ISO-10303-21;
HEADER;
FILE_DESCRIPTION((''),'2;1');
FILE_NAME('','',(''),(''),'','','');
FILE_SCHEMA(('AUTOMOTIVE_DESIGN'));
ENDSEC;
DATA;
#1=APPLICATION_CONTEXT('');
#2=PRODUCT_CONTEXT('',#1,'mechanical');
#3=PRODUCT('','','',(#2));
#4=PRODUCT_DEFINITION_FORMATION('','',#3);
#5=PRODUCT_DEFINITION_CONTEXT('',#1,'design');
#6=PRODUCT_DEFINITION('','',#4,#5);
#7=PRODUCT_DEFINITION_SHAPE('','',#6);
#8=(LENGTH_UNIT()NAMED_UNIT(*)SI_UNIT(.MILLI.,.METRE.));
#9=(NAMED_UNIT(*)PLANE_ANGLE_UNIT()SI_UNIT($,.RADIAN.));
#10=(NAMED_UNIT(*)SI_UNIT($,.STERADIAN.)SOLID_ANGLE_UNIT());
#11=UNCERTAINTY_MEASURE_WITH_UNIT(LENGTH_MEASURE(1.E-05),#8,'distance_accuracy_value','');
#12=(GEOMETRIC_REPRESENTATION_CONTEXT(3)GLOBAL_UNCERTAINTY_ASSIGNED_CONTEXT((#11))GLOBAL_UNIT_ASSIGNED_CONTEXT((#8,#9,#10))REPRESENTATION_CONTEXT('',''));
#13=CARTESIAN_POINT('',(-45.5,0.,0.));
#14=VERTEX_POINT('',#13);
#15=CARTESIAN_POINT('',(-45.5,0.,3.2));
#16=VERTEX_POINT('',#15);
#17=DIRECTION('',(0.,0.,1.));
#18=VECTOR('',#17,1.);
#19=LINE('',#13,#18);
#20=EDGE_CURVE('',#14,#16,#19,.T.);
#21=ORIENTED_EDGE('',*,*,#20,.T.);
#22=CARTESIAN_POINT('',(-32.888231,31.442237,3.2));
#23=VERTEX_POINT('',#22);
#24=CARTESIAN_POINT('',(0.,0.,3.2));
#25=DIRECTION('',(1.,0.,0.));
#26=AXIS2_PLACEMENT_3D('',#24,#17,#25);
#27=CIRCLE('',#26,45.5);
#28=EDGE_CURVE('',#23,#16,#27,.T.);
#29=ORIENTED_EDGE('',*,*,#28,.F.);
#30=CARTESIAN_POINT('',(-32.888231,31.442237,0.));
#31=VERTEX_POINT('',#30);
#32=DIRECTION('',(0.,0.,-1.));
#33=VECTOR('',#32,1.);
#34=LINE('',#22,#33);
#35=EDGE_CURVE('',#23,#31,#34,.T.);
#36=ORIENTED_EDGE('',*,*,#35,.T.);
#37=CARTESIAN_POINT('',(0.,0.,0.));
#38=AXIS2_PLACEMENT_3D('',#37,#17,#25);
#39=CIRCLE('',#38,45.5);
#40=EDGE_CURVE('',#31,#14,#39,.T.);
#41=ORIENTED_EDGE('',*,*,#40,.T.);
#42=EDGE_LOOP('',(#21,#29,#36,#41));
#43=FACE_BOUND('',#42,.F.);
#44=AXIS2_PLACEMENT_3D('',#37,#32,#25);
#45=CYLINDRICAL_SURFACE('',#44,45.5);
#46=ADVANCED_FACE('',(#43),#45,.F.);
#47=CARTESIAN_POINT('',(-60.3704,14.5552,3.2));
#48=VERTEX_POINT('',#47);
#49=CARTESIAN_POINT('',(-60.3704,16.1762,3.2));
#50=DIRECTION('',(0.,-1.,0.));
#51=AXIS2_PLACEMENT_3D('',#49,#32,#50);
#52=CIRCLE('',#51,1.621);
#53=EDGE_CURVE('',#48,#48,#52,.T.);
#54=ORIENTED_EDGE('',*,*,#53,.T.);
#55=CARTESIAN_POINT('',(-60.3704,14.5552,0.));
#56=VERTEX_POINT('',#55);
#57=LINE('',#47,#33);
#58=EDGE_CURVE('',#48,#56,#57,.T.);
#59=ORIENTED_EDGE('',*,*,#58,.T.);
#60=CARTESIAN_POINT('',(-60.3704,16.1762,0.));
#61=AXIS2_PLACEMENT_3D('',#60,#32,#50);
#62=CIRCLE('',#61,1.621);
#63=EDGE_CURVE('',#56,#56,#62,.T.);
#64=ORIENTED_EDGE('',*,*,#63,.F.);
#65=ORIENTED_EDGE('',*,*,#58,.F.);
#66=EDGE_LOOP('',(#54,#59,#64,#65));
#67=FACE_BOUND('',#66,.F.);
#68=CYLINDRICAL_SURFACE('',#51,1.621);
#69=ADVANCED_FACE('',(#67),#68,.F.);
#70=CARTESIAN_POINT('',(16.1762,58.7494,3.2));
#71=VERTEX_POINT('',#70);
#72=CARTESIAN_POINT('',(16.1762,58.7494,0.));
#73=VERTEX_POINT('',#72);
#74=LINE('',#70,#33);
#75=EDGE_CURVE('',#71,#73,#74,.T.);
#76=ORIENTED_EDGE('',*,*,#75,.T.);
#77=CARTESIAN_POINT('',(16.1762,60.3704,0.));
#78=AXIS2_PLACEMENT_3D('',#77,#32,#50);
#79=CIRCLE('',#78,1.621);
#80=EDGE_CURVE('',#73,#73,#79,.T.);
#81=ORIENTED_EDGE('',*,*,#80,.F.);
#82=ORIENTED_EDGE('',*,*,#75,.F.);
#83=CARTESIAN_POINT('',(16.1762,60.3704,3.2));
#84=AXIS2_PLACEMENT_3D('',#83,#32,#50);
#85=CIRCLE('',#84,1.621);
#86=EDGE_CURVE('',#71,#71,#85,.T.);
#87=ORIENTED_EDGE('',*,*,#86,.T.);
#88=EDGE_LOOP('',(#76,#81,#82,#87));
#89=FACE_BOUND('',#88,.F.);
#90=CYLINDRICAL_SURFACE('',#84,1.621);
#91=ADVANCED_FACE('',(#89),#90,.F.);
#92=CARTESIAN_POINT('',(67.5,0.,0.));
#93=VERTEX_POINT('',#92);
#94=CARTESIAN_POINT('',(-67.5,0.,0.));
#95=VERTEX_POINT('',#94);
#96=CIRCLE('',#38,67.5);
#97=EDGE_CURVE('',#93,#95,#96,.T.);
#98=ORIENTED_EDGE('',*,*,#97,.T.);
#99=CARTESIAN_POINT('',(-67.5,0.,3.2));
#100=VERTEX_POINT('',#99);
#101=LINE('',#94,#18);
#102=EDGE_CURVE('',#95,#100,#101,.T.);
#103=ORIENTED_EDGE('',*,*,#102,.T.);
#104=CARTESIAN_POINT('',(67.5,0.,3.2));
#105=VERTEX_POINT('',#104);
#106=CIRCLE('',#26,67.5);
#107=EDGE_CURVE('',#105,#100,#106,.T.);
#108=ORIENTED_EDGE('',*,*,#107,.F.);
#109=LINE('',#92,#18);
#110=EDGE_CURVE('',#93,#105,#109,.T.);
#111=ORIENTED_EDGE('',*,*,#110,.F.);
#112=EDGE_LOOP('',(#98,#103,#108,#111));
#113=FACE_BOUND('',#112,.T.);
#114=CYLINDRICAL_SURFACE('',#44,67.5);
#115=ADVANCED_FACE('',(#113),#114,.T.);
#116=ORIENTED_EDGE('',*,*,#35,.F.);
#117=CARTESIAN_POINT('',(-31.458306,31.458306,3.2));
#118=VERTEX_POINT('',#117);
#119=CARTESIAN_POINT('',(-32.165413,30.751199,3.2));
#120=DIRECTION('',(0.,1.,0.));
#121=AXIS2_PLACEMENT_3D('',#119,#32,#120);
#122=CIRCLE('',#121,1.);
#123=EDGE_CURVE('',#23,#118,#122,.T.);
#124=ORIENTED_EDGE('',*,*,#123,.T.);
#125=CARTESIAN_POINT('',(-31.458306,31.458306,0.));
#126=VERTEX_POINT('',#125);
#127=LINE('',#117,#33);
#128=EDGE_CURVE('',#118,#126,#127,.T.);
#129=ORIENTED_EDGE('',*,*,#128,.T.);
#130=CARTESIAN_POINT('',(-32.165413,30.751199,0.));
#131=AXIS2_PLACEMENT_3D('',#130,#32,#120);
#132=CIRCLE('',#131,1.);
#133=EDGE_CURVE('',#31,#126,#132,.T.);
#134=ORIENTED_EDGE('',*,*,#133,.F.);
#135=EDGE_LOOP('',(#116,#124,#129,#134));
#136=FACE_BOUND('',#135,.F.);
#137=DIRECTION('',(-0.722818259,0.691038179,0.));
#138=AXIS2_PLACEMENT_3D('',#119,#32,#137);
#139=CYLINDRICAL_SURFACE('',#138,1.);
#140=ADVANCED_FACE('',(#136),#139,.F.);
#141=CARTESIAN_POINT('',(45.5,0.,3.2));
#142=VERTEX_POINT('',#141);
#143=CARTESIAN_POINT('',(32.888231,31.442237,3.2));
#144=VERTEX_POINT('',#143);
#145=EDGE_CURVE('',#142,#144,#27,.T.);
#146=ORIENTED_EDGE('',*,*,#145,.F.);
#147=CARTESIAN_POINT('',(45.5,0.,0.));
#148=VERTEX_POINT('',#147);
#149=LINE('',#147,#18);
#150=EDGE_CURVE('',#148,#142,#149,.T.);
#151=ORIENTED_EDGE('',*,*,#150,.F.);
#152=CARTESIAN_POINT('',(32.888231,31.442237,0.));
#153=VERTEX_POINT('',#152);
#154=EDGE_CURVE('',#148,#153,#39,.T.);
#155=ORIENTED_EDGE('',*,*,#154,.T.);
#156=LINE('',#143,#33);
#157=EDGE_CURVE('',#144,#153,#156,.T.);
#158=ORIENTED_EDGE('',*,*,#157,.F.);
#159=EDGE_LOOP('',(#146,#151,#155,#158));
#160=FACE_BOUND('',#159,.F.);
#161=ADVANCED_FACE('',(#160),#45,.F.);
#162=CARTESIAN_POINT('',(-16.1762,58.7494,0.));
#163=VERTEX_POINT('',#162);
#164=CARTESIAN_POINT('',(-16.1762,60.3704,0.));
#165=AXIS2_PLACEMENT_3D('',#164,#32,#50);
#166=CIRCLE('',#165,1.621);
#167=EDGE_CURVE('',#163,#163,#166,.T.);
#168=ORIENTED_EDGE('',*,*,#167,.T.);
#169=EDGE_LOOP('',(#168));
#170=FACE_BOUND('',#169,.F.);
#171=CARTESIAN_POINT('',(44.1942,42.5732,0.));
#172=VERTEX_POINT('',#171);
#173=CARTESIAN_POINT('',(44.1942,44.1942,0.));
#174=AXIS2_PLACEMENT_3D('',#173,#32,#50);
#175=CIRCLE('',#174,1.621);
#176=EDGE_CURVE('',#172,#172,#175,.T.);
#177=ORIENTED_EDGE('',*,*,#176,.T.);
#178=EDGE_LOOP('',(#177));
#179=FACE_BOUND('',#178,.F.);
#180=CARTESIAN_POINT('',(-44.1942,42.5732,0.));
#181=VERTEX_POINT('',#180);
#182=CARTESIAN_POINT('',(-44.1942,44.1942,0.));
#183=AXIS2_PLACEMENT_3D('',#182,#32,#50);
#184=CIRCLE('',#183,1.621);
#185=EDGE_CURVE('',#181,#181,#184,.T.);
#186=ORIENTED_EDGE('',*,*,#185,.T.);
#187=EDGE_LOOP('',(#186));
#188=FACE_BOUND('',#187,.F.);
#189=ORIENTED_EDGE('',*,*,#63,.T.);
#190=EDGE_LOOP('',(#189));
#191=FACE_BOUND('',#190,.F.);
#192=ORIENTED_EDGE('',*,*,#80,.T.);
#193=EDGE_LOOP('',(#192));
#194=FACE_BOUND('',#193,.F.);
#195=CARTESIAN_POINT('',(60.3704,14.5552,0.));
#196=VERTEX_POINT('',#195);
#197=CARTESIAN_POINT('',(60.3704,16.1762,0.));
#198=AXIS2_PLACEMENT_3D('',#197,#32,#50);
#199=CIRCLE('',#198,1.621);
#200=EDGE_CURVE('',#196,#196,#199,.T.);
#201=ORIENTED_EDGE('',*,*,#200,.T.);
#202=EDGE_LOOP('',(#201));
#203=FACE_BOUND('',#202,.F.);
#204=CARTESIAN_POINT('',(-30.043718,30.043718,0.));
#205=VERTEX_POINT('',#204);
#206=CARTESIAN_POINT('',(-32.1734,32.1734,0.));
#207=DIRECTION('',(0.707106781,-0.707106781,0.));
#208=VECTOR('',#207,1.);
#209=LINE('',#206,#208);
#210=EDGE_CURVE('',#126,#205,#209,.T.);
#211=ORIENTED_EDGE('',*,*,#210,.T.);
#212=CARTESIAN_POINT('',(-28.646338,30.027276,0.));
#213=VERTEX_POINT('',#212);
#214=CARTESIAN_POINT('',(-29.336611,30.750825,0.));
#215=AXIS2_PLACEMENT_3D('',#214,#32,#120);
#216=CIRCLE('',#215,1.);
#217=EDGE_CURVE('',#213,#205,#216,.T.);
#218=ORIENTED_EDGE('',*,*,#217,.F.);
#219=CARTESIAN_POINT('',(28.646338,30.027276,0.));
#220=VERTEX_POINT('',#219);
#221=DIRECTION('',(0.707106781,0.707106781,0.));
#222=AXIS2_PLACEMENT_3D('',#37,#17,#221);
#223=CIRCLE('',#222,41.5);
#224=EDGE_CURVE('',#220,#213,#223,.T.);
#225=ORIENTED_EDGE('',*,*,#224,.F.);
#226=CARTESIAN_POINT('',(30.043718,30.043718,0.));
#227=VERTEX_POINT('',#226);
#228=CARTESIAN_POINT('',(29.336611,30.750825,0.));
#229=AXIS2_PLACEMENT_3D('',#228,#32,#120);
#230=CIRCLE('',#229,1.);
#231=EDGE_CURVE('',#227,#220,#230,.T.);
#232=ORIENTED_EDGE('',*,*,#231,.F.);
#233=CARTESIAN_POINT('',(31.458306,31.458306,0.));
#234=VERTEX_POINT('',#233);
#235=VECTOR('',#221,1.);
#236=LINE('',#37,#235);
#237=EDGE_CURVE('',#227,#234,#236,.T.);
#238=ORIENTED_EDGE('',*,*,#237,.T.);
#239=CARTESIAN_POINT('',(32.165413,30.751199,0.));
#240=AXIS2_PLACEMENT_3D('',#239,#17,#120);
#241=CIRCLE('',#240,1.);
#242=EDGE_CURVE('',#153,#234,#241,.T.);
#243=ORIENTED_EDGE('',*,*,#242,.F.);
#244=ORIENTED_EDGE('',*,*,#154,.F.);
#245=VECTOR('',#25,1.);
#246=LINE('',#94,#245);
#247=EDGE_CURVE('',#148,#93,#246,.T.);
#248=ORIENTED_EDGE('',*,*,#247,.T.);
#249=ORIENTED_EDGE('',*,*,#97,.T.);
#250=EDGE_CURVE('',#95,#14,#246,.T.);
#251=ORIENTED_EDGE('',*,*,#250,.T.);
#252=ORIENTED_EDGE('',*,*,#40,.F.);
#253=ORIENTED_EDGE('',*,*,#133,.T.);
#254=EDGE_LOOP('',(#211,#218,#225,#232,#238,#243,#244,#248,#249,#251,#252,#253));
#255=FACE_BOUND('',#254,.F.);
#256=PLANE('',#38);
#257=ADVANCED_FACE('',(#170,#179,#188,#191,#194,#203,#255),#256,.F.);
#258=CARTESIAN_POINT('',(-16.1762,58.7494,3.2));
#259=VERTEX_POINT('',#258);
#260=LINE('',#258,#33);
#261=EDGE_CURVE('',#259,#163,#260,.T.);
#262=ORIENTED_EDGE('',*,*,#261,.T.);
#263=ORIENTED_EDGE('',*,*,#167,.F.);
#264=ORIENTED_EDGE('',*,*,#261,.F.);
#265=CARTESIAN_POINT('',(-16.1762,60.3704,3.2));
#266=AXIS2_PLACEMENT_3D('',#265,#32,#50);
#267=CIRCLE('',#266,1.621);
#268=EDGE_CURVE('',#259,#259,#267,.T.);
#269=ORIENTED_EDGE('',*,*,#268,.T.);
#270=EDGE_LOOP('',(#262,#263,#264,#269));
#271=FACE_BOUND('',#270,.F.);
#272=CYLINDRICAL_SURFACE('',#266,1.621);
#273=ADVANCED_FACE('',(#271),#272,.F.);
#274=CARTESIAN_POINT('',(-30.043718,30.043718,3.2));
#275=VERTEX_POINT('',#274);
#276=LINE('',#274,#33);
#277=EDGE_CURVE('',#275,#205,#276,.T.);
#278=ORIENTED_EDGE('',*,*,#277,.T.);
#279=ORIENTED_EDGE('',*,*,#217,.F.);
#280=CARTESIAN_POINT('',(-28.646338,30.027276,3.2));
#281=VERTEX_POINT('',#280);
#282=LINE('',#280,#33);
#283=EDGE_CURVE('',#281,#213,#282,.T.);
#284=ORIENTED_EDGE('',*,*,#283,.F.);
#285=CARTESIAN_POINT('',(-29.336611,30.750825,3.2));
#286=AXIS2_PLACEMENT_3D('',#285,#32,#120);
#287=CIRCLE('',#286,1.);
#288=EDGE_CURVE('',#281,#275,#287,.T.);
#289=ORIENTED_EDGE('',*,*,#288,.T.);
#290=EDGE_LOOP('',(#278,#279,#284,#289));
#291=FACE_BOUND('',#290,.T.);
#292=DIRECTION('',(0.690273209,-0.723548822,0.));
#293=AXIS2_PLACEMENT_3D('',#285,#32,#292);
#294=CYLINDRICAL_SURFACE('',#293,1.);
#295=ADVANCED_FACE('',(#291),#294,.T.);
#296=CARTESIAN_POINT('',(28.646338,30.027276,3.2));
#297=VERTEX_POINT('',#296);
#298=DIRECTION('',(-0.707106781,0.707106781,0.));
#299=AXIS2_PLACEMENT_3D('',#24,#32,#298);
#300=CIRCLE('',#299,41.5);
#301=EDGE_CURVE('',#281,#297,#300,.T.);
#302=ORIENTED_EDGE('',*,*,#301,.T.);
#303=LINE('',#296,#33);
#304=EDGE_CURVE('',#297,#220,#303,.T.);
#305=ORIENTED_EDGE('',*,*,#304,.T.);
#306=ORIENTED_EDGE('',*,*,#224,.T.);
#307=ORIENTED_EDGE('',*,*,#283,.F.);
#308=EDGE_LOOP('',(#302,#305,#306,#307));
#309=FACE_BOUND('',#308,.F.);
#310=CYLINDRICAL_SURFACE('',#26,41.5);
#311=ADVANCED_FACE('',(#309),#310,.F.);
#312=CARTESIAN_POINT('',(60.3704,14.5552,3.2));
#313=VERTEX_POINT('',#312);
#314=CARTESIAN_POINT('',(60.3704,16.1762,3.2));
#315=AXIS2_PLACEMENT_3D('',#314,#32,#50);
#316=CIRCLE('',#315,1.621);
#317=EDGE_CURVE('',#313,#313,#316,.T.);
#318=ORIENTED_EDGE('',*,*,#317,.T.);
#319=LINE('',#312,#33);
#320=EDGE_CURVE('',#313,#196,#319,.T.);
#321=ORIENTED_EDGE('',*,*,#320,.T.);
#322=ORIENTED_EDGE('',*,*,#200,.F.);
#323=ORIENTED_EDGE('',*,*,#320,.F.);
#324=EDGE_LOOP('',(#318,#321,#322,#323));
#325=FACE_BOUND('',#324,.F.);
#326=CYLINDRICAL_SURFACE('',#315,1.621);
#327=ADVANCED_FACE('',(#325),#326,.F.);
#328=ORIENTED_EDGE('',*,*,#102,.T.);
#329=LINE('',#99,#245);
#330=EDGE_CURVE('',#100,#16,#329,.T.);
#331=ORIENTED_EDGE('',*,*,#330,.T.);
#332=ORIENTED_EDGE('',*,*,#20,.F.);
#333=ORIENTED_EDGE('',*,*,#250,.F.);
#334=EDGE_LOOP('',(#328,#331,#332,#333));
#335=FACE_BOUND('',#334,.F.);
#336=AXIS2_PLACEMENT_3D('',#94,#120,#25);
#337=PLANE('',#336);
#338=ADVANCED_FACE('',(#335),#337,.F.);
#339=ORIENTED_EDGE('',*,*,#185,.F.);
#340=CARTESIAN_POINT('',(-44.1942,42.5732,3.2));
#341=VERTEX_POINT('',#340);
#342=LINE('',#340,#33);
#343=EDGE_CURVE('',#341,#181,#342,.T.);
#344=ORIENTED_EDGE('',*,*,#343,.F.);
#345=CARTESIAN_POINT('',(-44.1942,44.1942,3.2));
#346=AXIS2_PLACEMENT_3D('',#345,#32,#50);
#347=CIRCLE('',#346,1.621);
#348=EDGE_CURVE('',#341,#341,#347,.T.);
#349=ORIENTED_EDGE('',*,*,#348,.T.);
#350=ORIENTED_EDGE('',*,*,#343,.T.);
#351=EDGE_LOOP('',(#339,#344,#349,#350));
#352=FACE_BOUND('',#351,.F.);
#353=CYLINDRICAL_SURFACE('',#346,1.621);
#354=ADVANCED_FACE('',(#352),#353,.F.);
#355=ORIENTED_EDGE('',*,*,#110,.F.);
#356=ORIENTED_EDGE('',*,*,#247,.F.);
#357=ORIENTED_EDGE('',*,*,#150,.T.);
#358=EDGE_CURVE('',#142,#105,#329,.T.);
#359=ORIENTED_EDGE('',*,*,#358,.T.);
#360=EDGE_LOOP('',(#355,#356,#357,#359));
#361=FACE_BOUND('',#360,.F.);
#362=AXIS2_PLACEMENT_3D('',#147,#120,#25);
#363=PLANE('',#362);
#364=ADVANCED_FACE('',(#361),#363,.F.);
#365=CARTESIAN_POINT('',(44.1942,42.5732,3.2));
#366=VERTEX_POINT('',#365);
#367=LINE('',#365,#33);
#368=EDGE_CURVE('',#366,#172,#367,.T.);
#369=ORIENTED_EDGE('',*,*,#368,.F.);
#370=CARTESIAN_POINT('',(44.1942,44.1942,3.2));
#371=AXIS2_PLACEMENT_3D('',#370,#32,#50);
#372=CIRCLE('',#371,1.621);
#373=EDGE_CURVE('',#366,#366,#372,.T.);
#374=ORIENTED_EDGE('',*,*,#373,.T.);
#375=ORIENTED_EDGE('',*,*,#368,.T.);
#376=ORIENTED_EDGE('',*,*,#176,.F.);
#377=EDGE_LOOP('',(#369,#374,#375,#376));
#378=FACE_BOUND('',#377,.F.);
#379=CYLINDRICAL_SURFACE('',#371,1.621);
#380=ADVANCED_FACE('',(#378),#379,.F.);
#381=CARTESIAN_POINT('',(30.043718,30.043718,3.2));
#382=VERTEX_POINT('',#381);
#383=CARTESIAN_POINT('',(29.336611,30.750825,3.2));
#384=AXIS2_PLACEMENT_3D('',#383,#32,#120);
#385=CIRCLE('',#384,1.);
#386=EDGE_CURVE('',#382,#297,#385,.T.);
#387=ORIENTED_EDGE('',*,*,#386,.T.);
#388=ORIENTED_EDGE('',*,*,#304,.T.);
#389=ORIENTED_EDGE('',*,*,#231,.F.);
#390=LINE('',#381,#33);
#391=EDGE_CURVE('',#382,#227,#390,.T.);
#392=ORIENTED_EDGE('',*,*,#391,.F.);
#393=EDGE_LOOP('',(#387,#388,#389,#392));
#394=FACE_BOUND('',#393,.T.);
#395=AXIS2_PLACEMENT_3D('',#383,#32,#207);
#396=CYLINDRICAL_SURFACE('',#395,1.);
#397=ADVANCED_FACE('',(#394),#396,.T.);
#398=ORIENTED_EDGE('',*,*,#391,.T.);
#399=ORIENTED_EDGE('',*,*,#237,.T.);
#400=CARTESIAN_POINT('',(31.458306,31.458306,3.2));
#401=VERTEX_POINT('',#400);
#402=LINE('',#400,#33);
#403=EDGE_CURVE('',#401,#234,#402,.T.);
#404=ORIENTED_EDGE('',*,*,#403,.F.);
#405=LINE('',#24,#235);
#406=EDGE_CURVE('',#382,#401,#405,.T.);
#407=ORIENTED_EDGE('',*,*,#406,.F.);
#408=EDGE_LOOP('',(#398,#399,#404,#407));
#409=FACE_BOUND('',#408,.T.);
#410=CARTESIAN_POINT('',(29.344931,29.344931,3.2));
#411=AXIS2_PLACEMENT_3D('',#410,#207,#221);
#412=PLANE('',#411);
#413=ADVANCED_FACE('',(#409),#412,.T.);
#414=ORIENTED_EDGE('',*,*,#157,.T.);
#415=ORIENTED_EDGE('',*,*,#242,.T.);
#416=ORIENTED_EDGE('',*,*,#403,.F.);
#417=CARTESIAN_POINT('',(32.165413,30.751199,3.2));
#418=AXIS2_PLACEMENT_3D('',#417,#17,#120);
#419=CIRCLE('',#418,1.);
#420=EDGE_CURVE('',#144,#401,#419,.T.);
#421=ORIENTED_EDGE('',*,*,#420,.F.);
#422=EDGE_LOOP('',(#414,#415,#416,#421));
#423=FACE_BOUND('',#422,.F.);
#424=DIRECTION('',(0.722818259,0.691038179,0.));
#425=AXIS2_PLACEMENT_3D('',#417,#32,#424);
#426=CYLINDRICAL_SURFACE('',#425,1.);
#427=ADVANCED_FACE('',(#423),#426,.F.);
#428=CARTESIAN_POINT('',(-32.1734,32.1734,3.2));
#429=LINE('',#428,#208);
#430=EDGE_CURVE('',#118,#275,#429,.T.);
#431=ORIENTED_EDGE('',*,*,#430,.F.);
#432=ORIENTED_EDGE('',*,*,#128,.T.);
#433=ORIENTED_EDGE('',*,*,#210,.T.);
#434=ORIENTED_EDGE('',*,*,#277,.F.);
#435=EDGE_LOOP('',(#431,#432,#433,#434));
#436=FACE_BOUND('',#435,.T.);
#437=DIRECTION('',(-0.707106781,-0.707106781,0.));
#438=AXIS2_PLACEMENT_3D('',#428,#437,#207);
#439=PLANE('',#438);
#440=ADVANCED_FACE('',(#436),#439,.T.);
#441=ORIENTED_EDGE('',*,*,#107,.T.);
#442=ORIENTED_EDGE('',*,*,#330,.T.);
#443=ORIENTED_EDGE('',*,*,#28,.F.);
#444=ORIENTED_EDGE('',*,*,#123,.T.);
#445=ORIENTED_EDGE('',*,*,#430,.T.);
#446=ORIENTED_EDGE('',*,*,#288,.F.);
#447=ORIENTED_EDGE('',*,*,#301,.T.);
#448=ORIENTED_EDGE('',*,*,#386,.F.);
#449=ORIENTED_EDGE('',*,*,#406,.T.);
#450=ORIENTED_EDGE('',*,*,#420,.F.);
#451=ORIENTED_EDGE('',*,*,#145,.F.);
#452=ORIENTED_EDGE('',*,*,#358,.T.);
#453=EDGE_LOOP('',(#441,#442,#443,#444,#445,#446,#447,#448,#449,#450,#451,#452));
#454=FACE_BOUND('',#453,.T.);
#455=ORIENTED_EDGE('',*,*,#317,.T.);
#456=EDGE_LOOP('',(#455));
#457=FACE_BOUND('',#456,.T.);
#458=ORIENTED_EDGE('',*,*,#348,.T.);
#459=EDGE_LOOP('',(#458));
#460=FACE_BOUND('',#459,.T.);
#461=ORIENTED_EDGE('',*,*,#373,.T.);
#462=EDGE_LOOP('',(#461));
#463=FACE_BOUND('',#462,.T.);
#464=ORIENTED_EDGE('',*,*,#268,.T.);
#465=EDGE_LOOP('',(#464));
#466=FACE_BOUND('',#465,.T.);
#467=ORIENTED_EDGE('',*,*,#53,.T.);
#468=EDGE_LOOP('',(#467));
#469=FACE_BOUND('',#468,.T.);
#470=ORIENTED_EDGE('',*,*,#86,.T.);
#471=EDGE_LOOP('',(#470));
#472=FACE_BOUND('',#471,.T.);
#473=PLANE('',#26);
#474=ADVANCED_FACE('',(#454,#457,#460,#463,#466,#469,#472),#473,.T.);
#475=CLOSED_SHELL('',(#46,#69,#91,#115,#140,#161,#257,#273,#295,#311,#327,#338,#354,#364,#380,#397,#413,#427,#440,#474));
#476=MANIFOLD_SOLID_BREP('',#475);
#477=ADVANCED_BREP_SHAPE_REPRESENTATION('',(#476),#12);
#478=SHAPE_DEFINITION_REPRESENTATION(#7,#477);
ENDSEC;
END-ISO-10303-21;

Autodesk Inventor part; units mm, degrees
ref_plane "YZ Plane" through (0, 0, 0) normal (1, 0, 0) x (0, 1, 0)
ref_plane "XZ Plane" through (0, 0, 0) normal (0, 1, 0) x (-1, 0, 0)
ref_plane "XY Plane" through (0, 0, 0) normal (0, 0, 1) x (1, 0, 0)
sketch "スケッチ5" plane through (0, 0, 3.2) normal (0, 0, 1) x (1, 0, 0)
  circle A0 centre (-16.1762, 60.3704) radius 1.621 projected
  circle A1 centre (16.1762, 60.3704) radius 1.621 projected
  arc A2 (67.5, 0) -> (-67.5, 0) centre (0, 0) ccw projected
  circle A3 centre (-16.1762, 60.3704) radius 5
  circle A4 centre (16.1762, 60.3704) radius 5
  circle A5 centre (-44.1942, 44.1942) radius 1.621 projected
  circle A6 centre (-60.3704, 16.1762) radius 1.621 projected
  circle A7 centre (44.1942, 44.1942) radius 1.621 projected
  circle A8 centre (60.3704, 16.1762) radius 1.621 projected
  arc A9 (62.5, 0) -> (-62.5, 0) centre (0, 0) ccw
  circle A10 centre (-44.1942, 44.1942) radius 5
  circle A11 centre (-60.3704, 16.1762) radius 5
  circle A12 centre (44.1942, 44.1942) radius 5
  circle A13 centre (60.3704, 16.1762) radius 5
  line L0 (-45.5, 0) -> (-67.5, 0) projected
  line L1 (67.5, 0) -> (45.5, 0) projected
  point P0 (17.4703, 65.2)
  point P1 (-17.4703, 65.2)
  point P2 (58.8841, 20.9502)
  point P3 (65.2, 17.4703)
  point P4 (47.7297, 47.7297)
  point P5 (47.5855, 40.52)
  point P6 (40.52, 47.5855)
  point P7 (20.9502, 58.8841)
  point P8 (-65.2, 17.4703)
  point P9 (-58.8841, 20.9502)
  point P10 (-47.5855, 40.52)
  point P11 (-47.7297, 47.7297)
  point P12 (-40.52, 47.5855)
  point P13 (-20.9502, 58.8841)
  point P14 (-11.2987, 61.4702)
  point P15 (11.2987, 61.4702)
  point P16 (61.4702, 11.2987)
  point P17 (-61.4702, 11.2987)
sketch "スケッチ1" plane through (0, 0, 0) normal (0, 0, 1) x (1, 0, 0)
  arc A0 (45.5, 0) -> (-45.5, 0) centre (0, 0) ccw
  arc A1 (67.5, 0) -> (-67.5, 0) centre (0, 0) ccw
  line L0 (-44.5, 0) -> (0, 0)
  line L1 (-67.5, 0) -> (67.5, 0)
  dimension "d0" = 91
  dimension "d1" = 135
  dimension "d5" = 0
extrude "プレート2" add sketch "スケッチ1" along normal blind 3.2 contours A0 L1 A1
sketch "スケッチ2" plane through (0, 0, 3.2) normal (0, 0, 1) x (1, 0, 0)
  circle A0 centre (0, 0) radius 62.5
  point P0 (16.1762, 60.3704)
  point P1 (-16.1762, 60.3704)
  point P2 (-44.1942, 44.1942)
  point P3 (-60.3704, 16.1762)
  point P4 (-60.3704, -16.1762)
  point P5 (-44.1942, -44.1942)
  point P6 (-16.1762, -60.3704)
  point P7 (16.1762, -60.3704)
  point P8 (44.1942, -44.1942)
  point P9 (60.3704, -16.1762)
  point P10 (60.3704, 16.1762)
  point P11 (44.1942, 44.1942)
  dimension "d8" = 125
  dimension "d11" = 360
  dimension "d49" = 0
hole "穴1" at (16.1762, 60.3704, 3.2) at (-16.1762, 60.3704, 3.2) at (-44.1942, 44.1942, 3.2) at (-60.3704, 16.1762, 3.2) at (-60.3704, -16.1762, 3.2) at (-44.1942, -44.1942, 3.2) at (-16.1762, -60.3704, 3.2) at (16.1762, -60.3704, 3.2) at (44.1942, -44.1942, 3.2) at (60.3704, -16.1762, 3.2) at (60.3704, 16.1762, 3.2) at (44.1942, 44.1942, 3.2) direction (0, 0, -1) diameter 3.242 end through all thread size "M4x0.7" class "6H" standard "ANSI Metric M Profile"
sketch "スケッチ6" plane through (0, 0, 3.2) normal (0, 0, 1) x (1, 0, 0)
  arc A0 (45.5, 0) -> (-45.5, 0) centre (0, 0) ccw projected
  line L0 (-32.1734, 32.1734) -> (0, 0)
  line L1 (0, 0) -> (32.1734, 32.1734)
  line L2 (0, 81) -> (0, -13.5) projected
  arc A1 (41.5, 0) -> (-41.5, 0) centre (0, 0) ccw
  point P0 (-29.3449, 29.3449)
  point P1 (29.3449, 29.3449)
  dimension "d50" = 45
  dimension "d51" = 45
  dimension "d56" = 4
extrude "押し出し2" add sketch "スケッチ6" against normal up to surface (3.2 mm away) contours L1 A1 L2 A0 | L2 A1 L0 A0
fillet "コーナーR7" radius 1 4 edges at (-29.3449, 29.3449, 1.6) (29.3449, 29.3449, 1.6) (-32.1734, 32.1734, 1.6) (32.1734, 32.1734, 1.6)
equation "\"d18\" = Thickness"
equation "\"d6\" = Thickness"
equation "\"BendRadius\" = Thickness"
equation "\"BendReliefWidth\" = Thickness"
equation "\"BendReliefDepth\" = 0.5 * Thickness"
equation "\"CornerReliefSize\" = 4 * Thickness"
equation "\"MinimumRemnant\" = 2 * Thickness"
equation "\"TransitionRadius\" = BendRadius"
equation "\"JacobiRadiusSize\" = BendRadius"
equation "\"GapSize\" = Thickness"
equation "\"Thickness\" = 3.2"
properties part number "plate1" material "鋼、炭素鋼"
